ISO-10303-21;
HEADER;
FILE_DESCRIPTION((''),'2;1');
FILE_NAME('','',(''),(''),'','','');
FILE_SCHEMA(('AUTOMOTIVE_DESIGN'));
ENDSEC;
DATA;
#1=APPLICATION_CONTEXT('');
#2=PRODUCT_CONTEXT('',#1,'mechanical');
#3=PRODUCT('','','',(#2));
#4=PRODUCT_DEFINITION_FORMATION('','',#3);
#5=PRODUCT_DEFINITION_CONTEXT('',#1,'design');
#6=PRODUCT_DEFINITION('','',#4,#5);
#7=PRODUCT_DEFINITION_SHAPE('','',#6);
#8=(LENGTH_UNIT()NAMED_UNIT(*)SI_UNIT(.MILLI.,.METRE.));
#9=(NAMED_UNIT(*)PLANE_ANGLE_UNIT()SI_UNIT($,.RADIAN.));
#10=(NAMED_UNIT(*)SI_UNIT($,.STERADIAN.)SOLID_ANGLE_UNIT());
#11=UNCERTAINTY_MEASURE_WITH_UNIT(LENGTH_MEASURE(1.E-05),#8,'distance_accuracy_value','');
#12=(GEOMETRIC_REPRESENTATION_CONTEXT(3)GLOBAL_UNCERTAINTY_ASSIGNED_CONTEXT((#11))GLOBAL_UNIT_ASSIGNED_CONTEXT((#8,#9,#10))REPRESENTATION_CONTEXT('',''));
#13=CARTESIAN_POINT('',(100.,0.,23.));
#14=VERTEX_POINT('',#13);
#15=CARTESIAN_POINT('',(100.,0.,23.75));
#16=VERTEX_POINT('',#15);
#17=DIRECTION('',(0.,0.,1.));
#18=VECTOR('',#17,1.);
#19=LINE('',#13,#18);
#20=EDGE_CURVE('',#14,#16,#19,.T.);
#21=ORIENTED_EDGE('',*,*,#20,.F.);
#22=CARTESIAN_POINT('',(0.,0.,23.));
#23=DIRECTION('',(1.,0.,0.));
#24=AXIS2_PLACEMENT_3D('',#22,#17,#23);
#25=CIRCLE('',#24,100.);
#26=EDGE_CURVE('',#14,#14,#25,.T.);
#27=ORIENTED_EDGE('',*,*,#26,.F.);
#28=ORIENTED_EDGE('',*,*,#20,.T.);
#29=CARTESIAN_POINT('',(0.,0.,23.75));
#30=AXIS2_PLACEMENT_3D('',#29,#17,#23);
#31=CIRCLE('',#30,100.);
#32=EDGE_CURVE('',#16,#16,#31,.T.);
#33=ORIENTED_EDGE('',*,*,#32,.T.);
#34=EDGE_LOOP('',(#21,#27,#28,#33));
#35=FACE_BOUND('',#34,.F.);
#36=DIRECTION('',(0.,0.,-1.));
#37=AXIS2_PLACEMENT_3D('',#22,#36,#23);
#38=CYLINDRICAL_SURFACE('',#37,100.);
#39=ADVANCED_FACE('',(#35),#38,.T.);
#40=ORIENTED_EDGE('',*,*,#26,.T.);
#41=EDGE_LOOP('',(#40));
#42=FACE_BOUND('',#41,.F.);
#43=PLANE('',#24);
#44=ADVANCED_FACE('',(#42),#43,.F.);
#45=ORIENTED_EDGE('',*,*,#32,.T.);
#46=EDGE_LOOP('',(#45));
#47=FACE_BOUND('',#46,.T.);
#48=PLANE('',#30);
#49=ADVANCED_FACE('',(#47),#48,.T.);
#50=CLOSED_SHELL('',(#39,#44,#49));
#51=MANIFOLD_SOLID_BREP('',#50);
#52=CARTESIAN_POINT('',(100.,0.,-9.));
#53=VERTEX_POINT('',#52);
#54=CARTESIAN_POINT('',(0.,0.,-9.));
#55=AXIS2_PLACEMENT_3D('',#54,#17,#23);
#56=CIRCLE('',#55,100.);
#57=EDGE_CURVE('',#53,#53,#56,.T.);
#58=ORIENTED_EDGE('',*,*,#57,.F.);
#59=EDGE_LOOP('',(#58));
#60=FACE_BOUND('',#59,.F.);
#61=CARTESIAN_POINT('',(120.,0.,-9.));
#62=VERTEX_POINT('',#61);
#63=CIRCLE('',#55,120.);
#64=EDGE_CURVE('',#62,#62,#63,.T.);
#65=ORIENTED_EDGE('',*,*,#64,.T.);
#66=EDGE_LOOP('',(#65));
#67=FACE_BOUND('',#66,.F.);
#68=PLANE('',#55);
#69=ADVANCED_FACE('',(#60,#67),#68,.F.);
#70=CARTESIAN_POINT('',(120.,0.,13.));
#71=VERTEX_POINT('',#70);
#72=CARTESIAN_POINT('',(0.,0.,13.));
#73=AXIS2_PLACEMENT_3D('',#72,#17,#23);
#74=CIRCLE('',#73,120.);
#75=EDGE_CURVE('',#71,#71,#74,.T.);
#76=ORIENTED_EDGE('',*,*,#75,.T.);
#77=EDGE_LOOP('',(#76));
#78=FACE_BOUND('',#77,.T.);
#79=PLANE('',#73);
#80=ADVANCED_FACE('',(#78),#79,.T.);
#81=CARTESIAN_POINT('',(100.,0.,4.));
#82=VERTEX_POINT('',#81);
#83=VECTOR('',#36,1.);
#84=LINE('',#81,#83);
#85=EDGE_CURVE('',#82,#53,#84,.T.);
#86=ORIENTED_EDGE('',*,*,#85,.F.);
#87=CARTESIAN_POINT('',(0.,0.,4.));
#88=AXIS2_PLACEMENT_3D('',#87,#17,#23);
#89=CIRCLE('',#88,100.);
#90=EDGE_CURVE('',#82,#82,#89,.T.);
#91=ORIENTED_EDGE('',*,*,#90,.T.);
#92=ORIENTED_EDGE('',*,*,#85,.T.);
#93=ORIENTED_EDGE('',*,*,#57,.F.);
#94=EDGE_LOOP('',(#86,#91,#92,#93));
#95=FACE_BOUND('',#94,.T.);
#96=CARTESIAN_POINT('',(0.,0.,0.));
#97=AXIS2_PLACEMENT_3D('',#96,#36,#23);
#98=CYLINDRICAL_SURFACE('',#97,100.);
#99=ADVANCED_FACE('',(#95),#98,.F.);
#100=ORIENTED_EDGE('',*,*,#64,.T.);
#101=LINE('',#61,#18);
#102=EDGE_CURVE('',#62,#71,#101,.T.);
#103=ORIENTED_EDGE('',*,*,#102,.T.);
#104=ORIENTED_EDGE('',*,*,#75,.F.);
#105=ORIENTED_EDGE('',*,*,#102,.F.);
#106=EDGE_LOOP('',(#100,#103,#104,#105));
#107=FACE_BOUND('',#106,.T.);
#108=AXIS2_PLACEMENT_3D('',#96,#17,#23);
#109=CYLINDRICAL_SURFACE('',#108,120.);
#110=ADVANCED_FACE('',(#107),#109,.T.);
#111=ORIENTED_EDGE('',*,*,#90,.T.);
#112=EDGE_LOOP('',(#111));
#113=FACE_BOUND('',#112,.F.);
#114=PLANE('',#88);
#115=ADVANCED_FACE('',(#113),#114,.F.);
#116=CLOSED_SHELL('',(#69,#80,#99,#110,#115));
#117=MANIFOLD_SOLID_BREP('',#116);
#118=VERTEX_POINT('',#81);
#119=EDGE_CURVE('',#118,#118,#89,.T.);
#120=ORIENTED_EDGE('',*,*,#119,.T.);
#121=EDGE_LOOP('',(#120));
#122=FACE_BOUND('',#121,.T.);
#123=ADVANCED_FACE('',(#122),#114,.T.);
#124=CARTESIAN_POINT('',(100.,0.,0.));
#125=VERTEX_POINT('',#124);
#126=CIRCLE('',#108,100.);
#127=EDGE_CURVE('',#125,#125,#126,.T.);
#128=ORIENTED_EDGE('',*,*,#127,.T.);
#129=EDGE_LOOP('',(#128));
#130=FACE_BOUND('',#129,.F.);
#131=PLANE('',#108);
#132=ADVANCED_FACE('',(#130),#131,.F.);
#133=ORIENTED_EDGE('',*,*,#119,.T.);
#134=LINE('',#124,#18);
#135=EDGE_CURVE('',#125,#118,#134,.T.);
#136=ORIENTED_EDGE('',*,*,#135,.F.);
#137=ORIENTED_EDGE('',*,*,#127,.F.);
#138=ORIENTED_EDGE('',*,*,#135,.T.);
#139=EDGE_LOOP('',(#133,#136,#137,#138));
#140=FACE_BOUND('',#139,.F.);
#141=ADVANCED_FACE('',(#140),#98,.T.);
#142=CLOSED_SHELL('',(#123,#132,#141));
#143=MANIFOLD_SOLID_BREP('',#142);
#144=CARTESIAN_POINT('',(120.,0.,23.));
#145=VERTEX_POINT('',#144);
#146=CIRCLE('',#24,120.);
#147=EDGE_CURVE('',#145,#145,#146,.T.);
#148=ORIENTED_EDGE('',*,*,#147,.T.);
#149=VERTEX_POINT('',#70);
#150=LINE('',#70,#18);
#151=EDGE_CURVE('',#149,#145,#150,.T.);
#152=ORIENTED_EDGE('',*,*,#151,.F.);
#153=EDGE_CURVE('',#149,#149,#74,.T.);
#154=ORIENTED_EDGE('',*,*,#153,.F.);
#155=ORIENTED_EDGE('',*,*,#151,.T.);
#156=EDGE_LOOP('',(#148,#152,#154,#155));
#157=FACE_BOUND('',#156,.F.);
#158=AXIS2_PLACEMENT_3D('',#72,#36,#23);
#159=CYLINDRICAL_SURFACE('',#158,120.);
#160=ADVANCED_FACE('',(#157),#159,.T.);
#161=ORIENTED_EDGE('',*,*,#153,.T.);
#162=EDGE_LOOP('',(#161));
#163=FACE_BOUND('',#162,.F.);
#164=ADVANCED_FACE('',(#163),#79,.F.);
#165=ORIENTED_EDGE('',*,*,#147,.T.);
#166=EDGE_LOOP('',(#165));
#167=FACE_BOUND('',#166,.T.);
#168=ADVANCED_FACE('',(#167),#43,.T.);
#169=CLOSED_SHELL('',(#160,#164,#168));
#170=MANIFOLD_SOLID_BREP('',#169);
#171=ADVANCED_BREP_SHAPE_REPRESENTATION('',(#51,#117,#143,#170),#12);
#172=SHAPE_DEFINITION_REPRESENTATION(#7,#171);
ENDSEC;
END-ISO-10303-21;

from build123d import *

# Parameters (mm, degrees)
F0_R     = 120
F0_R_2   = 100
F1_DEPTH = 9
F2_DEPTH = 4
F3_DEPTH = 13
F4_DEPTH = 9
F5_DEPTH = 10
F6_R     = 100
F7_DEPTH = 0.75


with BuildPart() as f1:
    # F0 (on Top) → F1 (new body)
    with BuildSketch(Plane.XY):
        Circle(F0_R)
        Circle(F0_R_2, mode=Mode.SUBTRACT)
    extrude(amount=-F1_DEPTH)

    # F0 (on Top) → F3 (join)
    with BuildSketch(Plane.XY):
        Circle(F0_R)
        Circle(F0_R_2, mode=Mode.SUBTRACT)
    extrude(amount=F3_DEPTH)



with BuildPart() as f2:
    # F0 (on Top) → F2 (new body)
    with BuildSketch(Plane.XY):
        Circle(F0_R_2)
    extrude(amount=F2_DEPTH)


with BuildPart() as f1_1:
    add(f1.part)
    # F4 (add): a face of the model
    f4_faces = [f2.part.faces().sort_by_distance(p)[0] for p in [
        (0, 0, 4),
    ]]
    extrude(f4_faces, amount=F4_DEPTH)


with BuildPart() as f5:
    # F5 (new): a face of the model
    f5_faces = [f1_1.part.faces().sort_by_distance(p)[0] for p in [
        (0, 0, 13),
    ]]
    extrude(f5_faces, amount=F5_DEPTH)


with BuildPart() as f7:
    # F6 (on face) → F7 (new body)
    with BuildSketch(Plane.XY.offset(23)):
        Circle(F6_R)
    extrude(amount=F7_DEPTH)


solid = Compound([f2.part, f1_1.part, f5.part, f7.part])
